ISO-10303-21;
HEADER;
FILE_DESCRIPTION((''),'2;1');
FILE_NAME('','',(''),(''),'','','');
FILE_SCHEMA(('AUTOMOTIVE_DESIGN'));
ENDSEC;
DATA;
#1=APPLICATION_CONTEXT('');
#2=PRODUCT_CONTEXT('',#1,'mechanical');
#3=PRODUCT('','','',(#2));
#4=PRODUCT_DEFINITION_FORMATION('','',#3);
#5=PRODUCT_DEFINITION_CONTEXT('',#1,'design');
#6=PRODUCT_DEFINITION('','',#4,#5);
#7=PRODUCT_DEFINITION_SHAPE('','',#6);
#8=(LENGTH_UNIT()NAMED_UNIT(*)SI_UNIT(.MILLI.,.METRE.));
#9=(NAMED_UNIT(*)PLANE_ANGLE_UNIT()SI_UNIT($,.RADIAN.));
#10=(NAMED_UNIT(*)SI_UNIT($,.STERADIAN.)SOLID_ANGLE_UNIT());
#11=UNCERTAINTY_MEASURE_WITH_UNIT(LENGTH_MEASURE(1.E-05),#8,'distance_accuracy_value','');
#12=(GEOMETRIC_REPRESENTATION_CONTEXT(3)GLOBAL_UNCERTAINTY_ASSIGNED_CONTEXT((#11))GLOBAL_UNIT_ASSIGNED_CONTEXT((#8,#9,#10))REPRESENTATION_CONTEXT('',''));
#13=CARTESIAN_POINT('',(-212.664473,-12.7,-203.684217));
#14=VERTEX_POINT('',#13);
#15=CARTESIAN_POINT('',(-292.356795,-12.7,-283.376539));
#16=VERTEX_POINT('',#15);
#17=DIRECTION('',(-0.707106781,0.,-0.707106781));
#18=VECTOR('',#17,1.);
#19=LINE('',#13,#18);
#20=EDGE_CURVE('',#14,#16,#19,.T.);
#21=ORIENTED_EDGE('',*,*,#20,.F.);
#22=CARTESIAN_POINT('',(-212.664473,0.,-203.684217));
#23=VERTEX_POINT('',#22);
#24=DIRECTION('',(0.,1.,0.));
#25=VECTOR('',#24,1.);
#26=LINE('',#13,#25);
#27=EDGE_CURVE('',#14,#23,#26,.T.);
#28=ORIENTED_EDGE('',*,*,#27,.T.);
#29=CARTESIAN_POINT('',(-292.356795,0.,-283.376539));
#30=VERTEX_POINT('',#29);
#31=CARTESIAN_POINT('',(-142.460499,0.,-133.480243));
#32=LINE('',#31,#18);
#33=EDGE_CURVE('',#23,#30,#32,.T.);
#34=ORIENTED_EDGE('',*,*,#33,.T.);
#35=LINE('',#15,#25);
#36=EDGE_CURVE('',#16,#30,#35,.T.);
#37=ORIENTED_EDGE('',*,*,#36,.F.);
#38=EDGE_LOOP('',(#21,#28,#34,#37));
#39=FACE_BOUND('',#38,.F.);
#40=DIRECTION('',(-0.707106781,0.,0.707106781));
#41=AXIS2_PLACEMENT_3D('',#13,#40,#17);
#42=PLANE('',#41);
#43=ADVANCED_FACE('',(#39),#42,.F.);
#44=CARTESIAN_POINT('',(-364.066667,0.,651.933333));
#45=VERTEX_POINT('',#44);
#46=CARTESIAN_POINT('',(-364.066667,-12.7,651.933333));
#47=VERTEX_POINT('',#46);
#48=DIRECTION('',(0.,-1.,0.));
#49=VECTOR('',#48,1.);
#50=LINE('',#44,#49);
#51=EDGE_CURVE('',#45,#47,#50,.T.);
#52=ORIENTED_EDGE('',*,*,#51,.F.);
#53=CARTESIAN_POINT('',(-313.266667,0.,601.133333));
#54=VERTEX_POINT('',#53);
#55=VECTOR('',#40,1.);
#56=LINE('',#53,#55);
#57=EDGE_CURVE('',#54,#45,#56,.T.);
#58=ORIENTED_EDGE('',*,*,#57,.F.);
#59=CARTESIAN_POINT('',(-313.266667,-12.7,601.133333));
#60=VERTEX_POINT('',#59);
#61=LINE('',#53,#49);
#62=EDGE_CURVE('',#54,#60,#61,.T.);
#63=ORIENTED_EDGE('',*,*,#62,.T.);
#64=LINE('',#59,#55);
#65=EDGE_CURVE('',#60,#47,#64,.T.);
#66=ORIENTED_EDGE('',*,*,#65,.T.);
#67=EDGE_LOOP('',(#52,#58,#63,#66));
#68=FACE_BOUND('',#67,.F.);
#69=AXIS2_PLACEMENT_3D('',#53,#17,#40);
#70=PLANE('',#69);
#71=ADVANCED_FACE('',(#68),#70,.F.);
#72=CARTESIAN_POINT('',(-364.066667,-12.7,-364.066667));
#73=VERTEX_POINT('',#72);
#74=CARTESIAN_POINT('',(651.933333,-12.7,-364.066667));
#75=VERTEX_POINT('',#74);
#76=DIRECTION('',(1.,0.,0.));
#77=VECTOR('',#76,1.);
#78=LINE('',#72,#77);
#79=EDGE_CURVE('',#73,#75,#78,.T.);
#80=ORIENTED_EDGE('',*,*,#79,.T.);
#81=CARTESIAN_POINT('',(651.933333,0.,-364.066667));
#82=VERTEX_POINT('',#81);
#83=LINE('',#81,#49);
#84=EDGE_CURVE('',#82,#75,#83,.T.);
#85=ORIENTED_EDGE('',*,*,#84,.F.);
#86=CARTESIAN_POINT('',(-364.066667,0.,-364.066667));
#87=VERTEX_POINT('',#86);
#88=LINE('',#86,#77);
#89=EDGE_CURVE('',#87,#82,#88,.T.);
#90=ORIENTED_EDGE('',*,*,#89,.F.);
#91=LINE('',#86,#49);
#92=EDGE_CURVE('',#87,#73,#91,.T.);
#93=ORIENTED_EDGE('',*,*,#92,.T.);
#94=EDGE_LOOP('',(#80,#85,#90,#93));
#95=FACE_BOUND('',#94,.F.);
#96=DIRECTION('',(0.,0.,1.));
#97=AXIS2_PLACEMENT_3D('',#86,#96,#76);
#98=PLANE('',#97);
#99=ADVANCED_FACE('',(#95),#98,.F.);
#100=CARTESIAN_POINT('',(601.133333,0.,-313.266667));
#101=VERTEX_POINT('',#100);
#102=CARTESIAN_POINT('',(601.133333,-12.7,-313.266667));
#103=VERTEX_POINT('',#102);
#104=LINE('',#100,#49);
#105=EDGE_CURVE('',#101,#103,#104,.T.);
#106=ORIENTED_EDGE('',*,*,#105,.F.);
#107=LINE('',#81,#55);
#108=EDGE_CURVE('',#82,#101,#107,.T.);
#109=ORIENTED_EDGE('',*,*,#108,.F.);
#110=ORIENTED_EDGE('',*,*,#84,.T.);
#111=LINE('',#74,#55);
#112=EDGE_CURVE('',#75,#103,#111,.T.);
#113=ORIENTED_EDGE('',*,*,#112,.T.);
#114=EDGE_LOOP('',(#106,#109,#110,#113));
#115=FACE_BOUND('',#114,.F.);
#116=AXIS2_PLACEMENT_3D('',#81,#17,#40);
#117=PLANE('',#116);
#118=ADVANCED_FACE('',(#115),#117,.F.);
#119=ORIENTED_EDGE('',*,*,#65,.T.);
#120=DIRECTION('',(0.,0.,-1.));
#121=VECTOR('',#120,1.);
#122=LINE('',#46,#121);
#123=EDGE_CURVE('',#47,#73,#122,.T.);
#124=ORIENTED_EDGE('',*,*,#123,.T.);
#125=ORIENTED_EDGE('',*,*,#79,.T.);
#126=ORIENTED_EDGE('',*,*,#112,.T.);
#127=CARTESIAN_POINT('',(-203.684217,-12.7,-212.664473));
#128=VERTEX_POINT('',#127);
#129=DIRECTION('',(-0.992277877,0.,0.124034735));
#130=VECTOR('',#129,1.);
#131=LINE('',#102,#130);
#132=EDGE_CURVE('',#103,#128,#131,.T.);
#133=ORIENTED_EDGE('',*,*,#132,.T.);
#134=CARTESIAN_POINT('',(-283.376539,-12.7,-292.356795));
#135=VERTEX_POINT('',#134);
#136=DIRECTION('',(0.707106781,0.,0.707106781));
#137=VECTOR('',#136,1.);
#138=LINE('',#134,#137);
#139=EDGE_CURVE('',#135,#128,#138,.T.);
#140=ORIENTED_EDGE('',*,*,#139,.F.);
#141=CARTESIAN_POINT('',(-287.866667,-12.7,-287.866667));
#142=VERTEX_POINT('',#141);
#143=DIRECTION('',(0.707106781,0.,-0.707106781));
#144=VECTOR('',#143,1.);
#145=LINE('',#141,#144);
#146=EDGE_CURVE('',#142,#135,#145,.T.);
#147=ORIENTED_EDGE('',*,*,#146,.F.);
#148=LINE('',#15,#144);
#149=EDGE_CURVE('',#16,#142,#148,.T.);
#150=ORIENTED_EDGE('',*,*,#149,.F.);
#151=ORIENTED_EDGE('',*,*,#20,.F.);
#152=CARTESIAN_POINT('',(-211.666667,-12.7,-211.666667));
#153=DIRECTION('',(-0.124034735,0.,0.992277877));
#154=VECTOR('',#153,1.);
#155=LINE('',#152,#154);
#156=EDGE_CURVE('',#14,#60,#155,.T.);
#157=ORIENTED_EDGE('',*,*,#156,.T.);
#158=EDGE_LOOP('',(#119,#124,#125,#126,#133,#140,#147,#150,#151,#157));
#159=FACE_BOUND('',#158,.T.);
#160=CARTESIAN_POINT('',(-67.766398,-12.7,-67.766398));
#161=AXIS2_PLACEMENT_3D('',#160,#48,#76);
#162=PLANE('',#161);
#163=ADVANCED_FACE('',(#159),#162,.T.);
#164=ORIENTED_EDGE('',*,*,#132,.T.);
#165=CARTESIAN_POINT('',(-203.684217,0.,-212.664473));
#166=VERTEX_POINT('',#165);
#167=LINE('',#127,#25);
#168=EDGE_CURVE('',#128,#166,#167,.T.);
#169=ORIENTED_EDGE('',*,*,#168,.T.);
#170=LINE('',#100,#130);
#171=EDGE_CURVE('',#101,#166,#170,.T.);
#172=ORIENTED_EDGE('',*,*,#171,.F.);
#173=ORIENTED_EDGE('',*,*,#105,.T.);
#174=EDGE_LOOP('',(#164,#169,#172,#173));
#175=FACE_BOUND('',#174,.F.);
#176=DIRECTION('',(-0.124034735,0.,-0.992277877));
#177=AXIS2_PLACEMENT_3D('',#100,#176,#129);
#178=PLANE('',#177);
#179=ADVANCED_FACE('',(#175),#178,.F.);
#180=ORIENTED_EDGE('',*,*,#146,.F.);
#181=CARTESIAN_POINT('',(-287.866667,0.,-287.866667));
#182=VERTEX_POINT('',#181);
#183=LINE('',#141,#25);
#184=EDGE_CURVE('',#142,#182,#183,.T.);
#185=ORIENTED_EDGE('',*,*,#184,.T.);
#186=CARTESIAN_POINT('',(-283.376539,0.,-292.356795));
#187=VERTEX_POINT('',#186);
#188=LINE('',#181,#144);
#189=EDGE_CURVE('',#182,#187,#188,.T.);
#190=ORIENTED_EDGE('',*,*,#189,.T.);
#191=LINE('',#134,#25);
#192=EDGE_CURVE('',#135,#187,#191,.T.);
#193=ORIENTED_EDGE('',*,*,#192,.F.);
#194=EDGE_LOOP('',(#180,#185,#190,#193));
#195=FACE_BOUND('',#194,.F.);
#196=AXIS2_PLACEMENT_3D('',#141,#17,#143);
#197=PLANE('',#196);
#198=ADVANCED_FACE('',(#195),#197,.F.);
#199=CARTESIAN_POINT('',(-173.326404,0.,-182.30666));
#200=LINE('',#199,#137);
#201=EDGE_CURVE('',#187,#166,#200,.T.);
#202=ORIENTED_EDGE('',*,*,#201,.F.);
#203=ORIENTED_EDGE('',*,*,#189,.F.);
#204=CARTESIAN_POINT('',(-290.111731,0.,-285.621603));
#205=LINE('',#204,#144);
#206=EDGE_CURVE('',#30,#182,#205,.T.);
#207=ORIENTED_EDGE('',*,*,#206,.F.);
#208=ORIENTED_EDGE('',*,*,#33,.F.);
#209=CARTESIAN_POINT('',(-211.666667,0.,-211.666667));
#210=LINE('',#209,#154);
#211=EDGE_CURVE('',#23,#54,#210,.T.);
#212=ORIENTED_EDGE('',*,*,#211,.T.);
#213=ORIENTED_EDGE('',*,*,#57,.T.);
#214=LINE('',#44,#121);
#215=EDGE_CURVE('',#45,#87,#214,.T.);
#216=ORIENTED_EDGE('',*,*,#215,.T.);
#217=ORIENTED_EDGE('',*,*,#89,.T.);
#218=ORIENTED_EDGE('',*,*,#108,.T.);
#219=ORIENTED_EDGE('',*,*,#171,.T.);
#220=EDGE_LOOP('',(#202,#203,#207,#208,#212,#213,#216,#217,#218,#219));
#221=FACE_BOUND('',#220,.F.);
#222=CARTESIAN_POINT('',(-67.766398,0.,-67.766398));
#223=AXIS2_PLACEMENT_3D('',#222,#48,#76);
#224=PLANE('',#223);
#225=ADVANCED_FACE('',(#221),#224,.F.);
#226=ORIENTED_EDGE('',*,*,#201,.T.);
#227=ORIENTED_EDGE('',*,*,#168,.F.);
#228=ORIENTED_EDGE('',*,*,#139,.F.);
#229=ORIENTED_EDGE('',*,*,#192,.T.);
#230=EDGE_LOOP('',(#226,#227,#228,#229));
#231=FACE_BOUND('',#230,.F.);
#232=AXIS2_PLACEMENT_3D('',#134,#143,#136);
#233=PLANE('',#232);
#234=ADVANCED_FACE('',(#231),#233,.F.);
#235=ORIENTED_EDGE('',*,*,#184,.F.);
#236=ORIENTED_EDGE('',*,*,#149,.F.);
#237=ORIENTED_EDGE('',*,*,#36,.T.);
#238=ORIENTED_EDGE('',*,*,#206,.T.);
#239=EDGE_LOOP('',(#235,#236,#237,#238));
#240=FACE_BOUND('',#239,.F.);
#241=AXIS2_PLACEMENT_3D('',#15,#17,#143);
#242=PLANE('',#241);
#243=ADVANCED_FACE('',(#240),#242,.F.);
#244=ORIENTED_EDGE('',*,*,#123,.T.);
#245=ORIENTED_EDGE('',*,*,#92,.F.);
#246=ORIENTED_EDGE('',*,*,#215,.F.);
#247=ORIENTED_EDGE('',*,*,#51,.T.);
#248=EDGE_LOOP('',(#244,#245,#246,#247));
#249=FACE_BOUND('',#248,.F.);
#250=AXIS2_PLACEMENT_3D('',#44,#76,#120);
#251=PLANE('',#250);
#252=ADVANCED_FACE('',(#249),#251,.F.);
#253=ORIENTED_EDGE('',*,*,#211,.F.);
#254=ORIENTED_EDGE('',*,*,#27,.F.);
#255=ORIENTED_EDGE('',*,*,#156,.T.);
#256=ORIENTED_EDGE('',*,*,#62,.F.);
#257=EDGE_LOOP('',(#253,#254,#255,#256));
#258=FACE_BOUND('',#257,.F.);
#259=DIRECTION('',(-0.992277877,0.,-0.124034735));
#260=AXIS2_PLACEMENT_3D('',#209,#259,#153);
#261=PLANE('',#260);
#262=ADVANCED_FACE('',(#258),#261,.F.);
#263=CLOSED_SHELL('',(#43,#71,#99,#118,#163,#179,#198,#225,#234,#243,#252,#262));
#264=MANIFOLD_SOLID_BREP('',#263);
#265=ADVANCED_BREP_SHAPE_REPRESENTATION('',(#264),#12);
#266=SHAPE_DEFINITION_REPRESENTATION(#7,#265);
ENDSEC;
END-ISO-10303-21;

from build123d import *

# Parameters (mm, degrees)
F1_DEPTH = 12.7
F3_DEPTH = 25.4


# Not quite as in the source:
# - a length typed as a fraction of an inch, garbled in the dataset ("3 / 203.2 mm" for 3/8 in), is restored


with BuildPart() as f1:
    # F0 (on Front) → F1 (new body)
    with BuildSketch(Plane.XZ):
        Polygon((-313.2666666667, 601.1333333333), (-364.0666666667, 651.9333333333), (-364.0666666667, -364.0666666667), (651.9333333333, -364.0666666667), (601.1333333333, -313.2666666667), (-211.6666666667, -211.6666666667), align=None)
    extrude(amount=F1_DEPTH)

    # F2 (on face) → F3 (cut)
    with BuildSketch(Plane.XZ.offset(12.7)):
        Polygon((-292.3567947272, -283.3765386061), (-287.8666666667, -287.8666666667), (-283.3765386061, -292.3567947272), (-203.6842167813, -212.6644729023), (-212.6644729023, -203.6842167813), align=None)
    extrude(amount=-F3_DEPTH, mode=Mode.SUBTRACT)


solid = f1.part
